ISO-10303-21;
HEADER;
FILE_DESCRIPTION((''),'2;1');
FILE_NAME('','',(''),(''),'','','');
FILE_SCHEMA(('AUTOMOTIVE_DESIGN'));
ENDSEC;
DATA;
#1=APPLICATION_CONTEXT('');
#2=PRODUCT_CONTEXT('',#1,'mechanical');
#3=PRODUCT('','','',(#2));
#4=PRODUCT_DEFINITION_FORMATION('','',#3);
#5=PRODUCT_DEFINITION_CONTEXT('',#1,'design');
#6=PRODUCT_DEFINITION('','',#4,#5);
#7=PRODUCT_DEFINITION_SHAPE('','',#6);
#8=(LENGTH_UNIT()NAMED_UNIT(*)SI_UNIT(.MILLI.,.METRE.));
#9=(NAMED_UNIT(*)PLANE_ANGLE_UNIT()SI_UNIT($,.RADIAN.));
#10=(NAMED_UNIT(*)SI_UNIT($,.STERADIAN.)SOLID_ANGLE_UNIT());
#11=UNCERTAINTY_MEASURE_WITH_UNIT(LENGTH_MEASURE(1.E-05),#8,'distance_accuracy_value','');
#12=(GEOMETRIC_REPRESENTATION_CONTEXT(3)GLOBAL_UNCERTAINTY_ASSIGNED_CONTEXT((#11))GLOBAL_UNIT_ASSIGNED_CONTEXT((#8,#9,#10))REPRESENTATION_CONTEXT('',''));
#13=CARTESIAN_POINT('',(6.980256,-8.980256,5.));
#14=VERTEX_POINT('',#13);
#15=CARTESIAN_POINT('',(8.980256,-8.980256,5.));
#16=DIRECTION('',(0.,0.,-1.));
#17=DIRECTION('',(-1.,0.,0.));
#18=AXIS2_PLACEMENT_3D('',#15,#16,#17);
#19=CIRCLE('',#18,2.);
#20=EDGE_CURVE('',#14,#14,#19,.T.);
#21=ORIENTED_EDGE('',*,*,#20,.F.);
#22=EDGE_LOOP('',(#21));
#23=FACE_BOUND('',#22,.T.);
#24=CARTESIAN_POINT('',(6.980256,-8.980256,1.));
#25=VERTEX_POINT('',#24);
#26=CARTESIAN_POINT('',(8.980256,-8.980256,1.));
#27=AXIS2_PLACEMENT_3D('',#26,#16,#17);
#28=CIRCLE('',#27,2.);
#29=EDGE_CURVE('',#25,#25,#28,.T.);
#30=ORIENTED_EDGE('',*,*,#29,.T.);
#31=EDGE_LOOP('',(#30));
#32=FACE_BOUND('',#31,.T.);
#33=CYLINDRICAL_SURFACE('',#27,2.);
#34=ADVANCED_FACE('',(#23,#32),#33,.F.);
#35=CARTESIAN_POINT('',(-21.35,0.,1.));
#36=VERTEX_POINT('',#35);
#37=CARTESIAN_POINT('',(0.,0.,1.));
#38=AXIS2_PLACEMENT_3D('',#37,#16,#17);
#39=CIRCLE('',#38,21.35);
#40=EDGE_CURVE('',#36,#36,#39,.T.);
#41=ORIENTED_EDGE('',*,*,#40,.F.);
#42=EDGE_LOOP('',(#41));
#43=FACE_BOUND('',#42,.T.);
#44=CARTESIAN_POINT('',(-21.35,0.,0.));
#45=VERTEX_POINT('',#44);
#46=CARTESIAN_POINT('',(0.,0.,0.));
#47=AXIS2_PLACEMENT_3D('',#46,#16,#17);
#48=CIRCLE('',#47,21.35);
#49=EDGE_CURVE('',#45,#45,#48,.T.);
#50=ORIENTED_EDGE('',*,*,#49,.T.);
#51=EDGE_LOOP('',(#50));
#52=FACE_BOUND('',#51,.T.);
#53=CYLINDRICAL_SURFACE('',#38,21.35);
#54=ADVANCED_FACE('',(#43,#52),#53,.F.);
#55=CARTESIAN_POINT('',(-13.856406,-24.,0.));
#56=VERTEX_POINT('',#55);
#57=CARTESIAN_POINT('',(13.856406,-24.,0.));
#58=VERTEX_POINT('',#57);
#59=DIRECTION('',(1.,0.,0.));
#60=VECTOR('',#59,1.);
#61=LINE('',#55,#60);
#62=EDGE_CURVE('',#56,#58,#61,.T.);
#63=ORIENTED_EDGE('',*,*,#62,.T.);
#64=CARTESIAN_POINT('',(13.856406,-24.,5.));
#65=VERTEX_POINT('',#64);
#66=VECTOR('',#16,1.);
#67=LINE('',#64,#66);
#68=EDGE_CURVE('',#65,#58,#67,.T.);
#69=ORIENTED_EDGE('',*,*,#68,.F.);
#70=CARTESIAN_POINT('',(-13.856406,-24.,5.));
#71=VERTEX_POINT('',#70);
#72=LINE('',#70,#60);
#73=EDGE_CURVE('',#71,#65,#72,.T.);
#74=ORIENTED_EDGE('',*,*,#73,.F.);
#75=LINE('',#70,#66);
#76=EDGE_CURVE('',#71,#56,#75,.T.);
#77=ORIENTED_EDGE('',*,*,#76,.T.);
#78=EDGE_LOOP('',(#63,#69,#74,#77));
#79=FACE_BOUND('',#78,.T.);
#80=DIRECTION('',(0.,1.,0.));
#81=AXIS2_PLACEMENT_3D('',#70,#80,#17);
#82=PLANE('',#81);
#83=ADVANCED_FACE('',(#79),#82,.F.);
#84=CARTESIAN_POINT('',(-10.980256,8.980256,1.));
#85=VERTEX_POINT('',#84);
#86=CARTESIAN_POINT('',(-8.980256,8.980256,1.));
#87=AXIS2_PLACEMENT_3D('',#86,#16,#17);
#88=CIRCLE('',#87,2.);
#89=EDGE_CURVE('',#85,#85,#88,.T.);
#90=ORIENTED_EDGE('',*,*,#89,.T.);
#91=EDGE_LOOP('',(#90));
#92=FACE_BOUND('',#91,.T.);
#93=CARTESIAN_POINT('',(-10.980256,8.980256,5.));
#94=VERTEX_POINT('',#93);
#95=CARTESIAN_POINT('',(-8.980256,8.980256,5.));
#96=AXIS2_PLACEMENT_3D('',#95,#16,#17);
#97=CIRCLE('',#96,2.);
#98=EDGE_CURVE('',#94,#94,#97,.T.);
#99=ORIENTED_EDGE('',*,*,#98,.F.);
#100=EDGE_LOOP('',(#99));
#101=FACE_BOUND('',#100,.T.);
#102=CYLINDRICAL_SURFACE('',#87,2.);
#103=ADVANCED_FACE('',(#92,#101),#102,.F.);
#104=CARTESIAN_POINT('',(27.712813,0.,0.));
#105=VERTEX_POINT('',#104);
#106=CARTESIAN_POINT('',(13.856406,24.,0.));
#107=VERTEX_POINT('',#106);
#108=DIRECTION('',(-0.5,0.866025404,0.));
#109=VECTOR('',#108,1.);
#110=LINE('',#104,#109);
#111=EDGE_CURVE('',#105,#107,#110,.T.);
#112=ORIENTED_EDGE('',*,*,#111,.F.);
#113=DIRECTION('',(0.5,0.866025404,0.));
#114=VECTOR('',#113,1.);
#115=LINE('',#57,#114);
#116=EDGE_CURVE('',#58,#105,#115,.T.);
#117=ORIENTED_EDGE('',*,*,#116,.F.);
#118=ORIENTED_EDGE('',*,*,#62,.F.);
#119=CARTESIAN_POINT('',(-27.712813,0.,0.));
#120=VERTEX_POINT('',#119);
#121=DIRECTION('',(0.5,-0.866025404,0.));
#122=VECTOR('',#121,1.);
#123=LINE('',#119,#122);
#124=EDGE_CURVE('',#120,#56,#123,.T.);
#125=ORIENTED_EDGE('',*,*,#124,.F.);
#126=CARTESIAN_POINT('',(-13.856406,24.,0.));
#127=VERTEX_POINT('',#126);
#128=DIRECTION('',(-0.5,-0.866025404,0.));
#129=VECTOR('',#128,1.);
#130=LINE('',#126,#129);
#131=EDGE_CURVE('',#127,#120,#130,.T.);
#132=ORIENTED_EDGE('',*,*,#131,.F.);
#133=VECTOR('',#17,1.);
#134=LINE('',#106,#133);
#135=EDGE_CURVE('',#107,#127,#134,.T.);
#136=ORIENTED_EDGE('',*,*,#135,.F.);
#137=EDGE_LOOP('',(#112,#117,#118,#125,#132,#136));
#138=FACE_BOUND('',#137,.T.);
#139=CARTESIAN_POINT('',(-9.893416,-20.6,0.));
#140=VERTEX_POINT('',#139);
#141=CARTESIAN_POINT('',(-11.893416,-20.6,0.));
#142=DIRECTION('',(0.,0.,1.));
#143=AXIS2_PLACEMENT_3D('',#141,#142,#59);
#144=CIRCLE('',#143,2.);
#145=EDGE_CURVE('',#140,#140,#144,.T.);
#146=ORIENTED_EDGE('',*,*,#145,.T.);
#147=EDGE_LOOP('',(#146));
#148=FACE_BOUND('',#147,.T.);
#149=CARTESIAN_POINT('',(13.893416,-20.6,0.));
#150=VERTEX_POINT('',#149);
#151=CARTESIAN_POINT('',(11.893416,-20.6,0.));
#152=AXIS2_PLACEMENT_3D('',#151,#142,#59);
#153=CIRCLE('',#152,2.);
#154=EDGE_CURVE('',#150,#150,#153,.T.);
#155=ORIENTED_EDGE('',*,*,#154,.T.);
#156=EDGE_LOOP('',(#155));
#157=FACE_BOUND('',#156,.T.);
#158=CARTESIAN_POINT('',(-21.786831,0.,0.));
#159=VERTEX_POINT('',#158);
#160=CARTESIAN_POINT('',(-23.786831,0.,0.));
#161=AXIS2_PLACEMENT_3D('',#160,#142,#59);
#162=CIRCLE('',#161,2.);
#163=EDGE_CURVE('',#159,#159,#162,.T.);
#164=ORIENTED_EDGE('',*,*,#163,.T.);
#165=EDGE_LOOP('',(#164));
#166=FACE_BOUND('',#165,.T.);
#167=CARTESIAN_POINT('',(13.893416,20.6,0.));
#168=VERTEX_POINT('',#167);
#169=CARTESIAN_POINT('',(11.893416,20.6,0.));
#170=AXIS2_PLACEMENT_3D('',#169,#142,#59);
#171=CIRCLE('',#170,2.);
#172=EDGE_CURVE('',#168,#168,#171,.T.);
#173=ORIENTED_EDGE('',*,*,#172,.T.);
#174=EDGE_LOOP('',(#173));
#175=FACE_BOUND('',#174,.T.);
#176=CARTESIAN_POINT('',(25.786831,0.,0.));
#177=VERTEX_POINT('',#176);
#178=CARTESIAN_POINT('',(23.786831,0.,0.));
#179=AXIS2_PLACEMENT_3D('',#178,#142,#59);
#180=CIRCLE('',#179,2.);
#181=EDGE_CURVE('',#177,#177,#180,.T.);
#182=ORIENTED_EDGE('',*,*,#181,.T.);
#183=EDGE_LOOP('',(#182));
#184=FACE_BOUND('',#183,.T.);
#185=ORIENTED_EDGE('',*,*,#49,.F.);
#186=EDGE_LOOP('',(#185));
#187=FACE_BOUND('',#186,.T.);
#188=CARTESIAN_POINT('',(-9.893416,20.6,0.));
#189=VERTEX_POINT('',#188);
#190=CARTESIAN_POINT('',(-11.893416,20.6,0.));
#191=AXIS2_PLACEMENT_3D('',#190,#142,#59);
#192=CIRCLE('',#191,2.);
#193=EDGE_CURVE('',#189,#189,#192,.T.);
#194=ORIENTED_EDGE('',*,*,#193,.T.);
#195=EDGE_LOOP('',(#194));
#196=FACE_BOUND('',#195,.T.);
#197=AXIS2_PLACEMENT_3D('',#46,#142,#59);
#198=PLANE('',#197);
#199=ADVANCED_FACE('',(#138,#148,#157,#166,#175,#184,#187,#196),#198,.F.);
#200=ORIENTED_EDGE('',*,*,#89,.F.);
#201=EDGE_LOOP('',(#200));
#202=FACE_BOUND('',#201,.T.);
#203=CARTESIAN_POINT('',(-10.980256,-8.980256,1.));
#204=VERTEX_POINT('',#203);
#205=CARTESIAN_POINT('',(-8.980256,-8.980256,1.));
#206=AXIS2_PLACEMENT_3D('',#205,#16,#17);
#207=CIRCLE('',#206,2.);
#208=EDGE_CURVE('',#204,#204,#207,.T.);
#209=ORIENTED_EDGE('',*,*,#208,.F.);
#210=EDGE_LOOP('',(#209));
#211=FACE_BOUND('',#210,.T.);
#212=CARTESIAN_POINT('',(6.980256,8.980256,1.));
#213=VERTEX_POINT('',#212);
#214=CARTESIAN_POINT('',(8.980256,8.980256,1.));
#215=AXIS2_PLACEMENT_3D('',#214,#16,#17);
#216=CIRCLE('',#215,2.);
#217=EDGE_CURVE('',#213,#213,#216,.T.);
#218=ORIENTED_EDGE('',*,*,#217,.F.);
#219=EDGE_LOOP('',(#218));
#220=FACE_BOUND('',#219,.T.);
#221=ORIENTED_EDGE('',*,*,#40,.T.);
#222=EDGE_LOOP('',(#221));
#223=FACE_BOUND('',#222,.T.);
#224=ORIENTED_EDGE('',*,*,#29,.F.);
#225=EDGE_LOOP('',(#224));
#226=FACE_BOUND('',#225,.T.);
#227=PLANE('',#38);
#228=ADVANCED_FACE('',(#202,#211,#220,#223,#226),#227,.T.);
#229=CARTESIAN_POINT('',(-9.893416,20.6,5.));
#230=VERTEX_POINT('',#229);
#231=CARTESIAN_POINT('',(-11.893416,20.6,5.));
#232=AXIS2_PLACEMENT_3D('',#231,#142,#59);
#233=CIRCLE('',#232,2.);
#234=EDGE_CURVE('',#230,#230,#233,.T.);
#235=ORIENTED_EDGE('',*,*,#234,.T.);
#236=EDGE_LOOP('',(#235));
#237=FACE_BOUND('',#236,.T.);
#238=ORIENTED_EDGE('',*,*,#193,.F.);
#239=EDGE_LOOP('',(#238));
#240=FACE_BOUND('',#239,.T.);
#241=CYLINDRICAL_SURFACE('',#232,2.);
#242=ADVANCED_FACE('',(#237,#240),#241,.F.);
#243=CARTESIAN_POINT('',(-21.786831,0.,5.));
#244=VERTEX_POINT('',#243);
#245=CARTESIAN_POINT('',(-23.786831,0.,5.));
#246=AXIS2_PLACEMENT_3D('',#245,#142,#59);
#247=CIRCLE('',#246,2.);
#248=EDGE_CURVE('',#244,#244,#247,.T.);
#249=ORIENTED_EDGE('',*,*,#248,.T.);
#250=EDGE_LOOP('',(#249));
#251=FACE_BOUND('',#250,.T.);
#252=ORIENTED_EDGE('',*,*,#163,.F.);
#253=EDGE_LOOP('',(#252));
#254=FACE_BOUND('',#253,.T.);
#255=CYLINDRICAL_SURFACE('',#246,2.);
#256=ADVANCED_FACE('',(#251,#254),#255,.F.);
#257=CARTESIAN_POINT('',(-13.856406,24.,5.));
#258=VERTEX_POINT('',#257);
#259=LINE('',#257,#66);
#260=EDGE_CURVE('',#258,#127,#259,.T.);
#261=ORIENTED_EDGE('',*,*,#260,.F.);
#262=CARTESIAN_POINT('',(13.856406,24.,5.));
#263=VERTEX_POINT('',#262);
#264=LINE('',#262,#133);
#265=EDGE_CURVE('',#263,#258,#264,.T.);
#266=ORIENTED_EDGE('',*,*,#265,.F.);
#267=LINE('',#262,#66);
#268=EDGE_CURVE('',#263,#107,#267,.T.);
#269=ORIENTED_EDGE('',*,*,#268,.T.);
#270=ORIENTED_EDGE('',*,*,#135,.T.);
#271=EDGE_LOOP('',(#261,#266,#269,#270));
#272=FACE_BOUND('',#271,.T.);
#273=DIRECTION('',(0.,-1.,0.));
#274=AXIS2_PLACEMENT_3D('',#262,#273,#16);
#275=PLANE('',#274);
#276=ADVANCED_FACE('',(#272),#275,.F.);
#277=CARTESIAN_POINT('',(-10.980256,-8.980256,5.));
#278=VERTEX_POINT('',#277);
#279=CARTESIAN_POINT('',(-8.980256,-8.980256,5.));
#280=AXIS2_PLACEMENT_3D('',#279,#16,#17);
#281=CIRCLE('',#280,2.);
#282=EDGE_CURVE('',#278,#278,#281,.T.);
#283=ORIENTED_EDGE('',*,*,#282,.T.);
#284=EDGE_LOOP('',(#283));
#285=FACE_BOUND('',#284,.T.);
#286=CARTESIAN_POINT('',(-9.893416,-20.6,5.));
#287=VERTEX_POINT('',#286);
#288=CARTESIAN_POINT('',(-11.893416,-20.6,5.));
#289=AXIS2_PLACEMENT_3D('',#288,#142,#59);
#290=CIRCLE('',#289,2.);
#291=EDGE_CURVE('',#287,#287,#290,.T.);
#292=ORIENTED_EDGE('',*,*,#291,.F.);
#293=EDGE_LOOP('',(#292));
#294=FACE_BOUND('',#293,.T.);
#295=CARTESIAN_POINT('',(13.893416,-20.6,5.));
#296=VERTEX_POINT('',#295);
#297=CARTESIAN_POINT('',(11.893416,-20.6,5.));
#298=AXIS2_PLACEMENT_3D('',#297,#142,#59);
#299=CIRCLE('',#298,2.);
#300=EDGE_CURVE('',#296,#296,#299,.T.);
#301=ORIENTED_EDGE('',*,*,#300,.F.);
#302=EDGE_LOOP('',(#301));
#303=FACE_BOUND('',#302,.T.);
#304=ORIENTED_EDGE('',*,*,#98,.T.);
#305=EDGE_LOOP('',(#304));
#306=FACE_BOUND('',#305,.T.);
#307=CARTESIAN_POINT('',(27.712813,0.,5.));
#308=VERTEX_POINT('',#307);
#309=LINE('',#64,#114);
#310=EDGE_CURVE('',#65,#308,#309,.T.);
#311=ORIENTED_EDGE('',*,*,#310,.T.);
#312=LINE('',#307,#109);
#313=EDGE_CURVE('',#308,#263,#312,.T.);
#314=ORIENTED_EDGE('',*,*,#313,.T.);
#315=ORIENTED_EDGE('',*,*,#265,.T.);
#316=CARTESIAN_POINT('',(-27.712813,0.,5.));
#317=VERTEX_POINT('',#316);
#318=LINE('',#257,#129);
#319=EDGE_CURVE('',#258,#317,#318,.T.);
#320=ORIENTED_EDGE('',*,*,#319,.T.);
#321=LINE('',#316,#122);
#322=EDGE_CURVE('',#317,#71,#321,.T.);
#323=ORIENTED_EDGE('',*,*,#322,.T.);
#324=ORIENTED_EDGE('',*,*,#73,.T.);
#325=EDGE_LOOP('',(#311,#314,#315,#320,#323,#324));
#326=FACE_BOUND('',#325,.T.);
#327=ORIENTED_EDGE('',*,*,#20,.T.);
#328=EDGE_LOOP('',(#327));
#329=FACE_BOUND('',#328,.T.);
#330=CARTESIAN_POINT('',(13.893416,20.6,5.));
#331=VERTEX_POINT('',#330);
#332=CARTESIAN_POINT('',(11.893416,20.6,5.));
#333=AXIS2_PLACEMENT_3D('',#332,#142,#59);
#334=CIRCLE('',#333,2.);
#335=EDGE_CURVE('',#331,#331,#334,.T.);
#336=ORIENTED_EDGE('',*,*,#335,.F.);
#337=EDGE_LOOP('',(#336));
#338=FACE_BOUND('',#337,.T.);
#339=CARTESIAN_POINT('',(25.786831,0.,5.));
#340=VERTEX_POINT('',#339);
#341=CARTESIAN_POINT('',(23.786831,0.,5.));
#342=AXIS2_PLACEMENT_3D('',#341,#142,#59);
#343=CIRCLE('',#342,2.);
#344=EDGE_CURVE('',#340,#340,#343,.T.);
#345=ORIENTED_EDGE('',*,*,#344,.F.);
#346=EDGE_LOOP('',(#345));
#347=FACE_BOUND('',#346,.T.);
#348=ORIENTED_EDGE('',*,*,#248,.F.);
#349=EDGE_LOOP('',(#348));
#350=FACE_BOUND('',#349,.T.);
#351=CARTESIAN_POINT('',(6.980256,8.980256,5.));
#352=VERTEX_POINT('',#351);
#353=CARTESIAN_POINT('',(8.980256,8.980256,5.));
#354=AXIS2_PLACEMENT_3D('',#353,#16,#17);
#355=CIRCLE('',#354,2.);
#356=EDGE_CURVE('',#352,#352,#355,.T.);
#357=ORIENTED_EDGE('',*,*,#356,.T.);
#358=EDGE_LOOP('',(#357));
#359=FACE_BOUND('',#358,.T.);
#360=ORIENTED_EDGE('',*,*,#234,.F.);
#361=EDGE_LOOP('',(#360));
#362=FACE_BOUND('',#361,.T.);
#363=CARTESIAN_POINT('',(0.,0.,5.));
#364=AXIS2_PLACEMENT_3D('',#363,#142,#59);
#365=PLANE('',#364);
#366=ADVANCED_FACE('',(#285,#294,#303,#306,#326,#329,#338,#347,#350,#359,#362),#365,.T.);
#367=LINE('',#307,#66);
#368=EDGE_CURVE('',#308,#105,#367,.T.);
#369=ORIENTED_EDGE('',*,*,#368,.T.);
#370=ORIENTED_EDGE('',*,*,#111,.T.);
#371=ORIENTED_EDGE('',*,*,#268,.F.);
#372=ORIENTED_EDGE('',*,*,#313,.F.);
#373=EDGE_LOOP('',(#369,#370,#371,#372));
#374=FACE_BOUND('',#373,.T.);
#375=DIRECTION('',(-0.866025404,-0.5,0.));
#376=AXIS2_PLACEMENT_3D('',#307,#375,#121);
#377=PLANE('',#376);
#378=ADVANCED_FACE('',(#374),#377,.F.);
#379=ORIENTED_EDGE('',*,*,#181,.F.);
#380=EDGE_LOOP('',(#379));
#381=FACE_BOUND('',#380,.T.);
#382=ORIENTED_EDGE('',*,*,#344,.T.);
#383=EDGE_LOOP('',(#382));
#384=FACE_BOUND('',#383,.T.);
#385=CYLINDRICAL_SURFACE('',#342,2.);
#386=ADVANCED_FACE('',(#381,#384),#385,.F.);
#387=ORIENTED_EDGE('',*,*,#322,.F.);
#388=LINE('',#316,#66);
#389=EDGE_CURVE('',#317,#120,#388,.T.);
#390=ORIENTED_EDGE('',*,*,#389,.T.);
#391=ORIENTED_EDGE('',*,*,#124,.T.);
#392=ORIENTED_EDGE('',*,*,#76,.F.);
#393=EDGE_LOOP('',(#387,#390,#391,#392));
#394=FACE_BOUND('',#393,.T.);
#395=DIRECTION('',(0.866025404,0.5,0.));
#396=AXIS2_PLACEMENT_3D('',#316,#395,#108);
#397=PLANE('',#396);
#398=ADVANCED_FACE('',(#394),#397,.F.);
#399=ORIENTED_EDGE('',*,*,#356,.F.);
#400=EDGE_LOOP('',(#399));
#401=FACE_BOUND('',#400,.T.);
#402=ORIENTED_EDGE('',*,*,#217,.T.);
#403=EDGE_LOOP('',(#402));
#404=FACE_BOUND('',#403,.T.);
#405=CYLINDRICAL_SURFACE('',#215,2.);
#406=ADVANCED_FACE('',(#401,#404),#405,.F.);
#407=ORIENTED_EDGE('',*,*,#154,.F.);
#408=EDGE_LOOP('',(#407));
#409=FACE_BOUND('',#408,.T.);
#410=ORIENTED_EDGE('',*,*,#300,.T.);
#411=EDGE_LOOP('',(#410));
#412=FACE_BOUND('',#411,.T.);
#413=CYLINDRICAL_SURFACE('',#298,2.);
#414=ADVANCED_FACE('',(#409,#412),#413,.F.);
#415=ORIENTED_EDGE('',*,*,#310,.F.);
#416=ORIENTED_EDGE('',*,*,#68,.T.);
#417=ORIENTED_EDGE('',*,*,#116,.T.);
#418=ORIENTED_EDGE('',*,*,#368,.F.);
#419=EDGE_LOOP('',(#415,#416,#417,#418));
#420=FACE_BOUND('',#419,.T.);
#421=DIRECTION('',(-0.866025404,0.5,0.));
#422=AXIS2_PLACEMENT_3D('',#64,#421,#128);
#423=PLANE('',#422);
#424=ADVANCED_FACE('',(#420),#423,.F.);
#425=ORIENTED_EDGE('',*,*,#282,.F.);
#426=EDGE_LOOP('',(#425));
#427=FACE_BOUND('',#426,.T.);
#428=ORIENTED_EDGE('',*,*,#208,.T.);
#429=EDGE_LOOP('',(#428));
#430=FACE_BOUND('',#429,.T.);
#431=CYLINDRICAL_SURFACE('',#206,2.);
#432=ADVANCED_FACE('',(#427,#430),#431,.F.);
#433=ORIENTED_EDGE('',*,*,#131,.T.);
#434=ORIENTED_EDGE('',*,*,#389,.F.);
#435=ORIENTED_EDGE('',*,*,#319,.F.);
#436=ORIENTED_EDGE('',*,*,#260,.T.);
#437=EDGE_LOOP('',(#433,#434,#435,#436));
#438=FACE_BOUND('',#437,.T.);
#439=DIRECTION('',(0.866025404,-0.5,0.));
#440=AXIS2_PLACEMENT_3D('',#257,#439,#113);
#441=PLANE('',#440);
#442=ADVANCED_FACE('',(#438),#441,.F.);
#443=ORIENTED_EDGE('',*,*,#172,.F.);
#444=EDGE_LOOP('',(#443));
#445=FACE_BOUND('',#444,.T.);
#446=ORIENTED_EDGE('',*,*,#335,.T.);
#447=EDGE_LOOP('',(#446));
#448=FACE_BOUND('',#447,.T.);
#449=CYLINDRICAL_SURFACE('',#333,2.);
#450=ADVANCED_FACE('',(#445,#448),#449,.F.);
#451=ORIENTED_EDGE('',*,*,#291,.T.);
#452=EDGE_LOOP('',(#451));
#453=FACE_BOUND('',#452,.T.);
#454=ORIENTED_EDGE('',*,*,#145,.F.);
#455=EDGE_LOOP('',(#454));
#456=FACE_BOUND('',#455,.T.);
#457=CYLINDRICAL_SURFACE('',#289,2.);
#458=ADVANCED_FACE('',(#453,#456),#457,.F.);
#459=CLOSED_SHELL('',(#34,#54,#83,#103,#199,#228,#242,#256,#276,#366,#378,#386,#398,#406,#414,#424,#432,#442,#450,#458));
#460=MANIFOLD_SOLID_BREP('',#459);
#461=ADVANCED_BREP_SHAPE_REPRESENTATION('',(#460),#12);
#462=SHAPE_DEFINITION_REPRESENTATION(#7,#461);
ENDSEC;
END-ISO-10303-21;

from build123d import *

# Parameters (mm, degrees)
EXTRUDE_1_DEPTH     = 5
SKETCH_11_R         = 21.35
CUT_EXTRUDE_1_DEPTH = 1
F_4_0MM_2_D         = 4
F_4_0MM_3_OUTLINE_R = 2
F_4_0MM_3_DEPTH     = 5


# Read off the part's stored shape, not the designer's step: Ø4.0mm 暗销孔3
with BuildPart() as part:
    # 草图2 → 凸台-拉伸1 (new body)
    with BuildSketch(Plane.XY):
        Polygon((-13.856406461, 24), (-27.712812921, 0), (-13.856406461, -24), (13.856406461, -24), (27.712812921, 0), (13.856406461, 24), align=None)
    extrude(amount=EXTRUDE_1_DEPTH)

    # 草图11 → 切除-拉伸1 (cut)
    with BuildSketch(Plane(origin=(0, 0, 0), x_dir=(-1, 0, 0), z_dir=(0, 0, -1))):
        Circle(SKETCH_11_R)
    extrude(amount=-CUT_EXTRUDE_1_DEPTH, mode=Mode.SUBTRACT)

    # Ø4.0mm 暗销孔2 (through all)
    with Locations(Plane(origin=(0, 0, 1), x_dir=(-1, 0, 0), z_dir=(0, 0, -1))):
        with Locations((8.980256121, 8.980256121), (-8.980256121, 8.980256121), (-8.980256121, -8.980256121), (8.980256121, -8.980256121)):
            Hole(F_4_0MM_2_D / 2)

    # Ø4.0mm 暗销孔3 outline → Ø4.0mm 暗销孔3 (cut)
    with BuildSketch(Plane.XY):
        with Locations((23.786831091, 0)):
            Circle(F_4_0MM_3_OUTLINE_R)
        with Locations((-11.893415545, -20.6)):
            Circle(F_4_0MM_3_OUTLINE_R)
        with Locations((11.893415545, -20.6)):
            Circle(F_4_0MM_3_OUTLINE_R)
        with Locations((-23.786831091, 0)):
            Circle(F_4_0MM_3_OUTLINE_R)
        with Locations((-11.893415545, 20.6)):
            Circle(F_4_0MM_3_OUTLINE_R)
        with Locations((11.893415545, 20.6)):
            Circle(F_4_0MM_3_OUTLINE_R)
    extrude(amount=F_4_0MM_3_DEPTH, mode=Mode.SUBTRACT)


solid = part.part
